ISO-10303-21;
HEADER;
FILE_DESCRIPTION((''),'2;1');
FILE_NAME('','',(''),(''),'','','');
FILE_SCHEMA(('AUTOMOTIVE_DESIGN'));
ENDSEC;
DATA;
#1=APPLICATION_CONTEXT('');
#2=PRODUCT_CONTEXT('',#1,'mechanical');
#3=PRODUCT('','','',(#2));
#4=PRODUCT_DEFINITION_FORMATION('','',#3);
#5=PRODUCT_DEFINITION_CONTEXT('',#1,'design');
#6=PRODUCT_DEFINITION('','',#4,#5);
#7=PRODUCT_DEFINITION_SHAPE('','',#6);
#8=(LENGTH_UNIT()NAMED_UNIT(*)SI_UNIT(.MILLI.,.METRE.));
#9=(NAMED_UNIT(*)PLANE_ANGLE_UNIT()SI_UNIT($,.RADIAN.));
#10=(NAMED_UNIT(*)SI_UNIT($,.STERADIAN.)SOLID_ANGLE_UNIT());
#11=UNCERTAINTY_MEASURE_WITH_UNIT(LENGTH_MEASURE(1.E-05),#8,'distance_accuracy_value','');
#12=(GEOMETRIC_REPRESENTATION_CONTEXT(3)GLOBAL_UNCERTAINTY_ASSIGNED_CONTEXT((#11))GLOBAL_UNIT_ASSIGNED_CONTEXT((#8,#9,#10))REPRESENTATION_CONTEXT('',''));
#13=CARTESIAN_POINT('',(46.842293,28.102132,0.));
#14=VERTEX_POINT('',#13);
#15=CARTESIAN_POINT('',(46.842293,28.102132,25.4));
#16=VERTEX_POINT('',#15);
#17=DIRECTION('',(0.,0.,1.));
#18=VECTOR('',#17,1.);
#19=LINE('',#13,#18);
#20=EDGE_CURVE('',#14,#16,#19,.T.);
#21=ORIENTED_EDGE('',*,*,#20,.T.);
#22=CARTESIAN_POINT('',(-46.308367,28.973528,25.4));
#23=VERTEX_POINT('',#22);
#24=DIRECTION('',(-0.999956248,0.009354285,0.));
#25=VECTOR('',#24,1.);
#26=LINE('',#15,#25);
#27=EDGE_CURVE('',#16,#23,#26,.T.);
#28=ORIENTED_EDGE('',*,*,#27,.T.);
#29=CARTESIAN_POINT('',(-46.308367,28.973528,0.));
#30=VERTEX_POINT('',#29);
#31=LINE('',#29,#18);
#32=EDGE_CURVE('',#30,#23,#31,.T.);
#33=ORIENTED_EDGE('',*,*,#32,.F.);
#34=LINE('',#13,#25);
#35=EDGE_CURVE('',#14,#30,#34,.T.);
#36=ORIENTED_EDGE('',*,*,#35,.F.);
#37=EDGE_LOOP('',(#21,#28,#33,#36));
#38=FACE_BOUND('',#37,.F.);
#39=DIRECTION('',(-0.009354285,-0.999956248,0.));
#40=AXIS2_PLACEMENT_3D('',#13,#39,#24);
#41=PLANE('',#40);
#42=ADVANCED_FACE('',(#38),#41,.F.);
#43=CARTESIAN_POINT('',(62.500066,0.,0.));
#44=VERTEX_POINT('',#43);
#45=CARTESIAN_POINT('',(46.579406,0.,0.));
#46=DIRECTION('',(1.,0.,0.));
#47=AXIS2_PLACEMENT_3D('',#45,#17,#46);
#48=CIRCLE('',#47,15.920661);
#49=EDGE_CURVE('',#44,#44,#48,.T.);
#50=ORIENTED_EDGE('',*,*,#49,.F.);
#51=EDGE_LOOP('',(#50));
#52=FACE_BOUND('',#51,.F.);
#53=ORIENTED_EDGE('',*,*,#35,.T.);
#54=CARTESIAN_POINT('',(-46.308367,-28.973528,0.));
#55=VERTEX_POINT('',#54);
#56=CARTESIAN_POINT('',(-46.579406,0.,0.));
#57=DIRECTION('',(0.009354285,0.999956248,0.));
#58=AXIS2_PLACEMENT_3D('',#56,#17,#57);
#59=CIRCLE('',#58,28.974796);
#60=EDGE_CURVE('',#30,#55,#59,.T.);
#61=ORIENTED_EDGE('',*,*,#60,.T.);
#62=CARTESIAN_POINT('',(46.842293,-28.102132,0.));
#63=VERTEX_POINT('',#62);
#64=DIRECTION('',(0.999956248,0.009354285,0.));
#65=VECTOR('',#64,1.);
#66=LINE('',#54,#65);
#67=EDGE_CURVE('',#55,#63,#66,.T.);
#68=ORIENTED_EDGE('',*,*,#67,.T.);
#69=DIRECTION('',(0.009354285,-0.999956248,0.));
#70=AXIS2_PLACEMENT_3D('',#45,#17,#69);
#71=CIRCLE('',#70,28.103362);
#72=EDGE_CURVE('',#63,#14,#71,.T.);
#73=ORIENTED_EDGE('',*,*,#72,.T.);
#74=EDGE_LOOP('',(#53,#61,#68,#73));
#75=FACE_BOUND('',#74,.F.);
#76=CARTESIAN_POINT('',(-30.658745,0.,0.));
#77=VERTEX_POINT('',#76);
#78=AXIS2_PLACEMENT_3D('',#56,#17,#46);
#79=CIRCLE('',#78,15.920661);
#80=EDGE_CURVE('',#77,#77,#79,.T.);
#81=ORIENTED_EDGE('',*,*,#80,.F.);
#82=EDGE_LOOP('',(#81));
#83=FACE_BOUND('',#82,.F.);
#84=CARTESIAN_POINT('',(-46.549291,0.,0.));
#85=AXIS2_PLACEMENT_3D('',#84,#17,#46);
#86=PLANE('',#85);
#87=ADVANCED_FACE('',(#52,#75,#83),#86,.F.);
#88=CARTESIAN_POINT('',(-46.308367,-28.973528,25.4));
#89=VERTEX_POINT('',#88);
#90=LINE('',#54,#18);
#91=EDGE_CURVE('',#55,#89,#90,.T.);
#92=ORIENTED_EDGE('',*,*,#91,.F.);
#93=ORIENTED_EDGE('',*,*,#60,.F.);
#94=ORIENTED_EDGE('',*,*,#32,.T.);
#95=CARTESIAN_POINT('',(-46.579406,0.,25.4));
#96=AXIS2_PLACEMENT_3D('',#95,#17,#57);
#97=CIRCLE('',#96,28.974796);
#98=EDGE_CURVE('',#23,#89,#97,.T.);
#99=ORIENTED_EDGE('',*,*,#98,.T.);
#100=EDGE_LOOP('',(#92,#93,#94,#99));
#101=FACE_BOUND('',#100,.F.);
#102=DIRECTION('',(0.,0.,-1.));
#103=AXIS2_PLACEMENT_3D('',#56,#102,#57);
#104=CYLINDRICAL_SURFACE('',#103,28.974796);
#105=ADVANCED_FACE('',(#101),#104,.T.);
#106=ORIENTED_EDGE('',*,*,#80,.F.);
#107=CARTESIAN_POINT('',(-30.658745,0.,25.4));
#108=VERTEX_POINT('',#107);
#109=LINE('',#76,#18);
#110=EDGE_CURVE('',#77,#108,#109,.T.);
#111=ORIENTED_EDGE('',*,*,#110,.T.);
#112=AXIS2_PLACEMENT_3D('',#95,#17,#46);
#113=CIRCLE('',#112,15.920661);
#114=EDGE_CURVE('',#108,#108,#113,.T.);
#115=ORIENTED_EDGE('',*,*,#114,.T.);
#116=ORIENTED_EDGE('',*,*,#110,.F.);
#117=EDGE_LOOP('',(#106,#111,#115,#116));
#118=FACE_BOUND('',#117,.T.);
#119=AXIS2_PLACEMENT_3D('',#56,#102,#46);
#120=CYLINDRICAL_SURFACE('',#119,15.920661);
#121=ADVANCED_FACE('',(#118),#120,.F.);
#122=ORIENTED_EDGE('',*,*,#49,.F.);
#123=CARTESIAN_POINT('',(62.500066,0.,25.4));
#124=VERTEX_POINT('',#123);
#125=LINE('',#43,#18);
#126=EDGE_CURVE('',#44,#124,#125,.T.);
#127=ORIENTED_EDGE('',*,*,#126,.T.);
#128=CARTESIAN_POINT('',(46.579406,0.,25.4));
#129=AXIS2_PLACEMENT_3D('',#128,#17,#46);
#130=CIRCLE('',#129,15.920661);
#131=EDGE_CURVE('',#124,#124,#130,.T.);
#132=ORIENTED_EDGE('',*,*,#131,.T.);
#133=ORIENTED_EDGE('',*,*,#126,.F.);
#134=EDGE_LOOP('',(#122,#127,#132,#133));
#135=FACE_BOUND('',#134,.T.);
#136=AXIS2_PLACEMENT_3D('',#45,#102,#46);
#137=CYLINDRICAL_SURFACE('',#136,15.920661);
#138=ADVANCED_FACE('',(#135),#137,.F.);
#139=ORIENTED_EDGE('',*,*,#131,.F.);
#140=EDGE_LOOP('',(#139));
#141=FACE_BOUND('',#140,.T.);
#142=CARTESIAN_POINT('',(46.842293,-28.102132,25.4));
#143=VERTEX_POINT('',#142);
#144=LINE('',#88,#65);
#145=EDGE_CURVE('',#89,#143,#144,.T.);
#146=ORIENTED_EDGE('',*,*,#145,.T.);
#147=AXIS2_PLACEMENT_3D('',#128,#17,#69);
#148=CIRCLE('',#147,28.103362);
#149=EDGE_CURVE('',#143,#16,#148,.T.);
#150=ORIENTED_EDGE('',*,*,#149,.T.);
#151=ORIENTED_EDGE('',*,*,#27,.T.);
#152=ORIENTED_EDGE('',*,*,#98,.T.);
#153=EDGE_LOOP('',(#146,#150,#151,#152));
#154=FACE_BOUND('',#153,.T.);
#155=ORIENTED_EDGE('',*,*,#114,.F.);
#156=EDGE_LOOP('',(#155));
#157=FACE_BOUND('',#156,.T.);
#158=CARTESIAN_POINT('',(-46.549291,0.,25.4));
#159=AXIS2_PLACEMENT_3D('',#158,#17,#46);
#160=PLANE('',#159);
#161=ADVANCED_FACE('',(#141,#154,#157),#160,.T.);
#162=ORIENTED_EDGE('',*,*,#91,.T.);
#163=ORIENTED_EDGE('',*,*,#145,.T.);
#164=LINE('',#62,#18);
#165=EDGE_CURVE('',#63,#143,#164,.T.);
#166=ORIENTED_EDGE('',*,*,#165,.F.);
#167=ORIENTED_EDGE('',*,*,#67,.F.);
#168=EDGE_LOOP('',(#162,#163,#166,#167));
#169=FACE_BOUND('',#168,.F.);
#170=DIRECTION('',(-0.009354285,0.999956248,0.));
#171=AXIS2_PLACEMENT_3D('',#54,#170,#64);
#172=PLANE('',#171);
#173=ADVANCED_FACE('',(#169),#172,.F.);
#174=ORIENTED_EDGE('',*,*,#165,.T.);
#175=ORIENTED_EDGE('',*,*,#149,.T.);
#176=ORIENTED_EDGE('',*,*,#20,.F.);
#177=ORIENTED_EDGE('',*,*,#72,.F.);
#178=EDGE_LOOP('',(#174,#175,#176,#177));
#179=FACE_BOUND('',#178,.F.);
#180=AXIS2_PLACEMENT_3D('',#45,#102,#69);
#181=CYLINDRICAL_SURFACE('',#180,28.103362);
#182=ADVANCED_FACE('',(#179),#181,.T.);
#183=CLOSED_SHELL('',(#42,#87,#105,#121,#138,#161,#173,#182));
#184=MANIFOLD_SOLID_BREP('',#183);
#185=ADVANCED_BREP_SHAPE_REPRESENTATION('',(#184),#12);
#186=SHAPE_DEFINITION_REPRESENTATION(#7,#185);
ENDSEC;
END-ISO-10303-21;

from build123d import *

# Parameters (mm, degrees)
F0_R     = 15.9206607186
F1_DEPTH = 25.4


# Not quite as in the source:
# - the program builds the solid bodies; features that only make, move or delete a surface that nothing else refers to are left out


with BuildPart() as f1:
    # F0 (on Top) → F1 (new body)
    with BuildSketch(Plane.XY):
        with BuildLine():
            ThreePointArc((-46.3083671537, -28.9735284728), (-17.6046094791, 0), (-46.3083671537, 28.9735284728))
            ThreePointArc((-46.3083671537, 28.9735284728), (-75.5542018517, 0), (-46.3083671537, -28.9735284728))
        make_face()
        with Locations((-46.5794056654, 0)):
            Circle(F0_R, mode=Mode.SUBTRACT)
        with BuildLine():
            Line((46.8422925338, 28.1021324953), (-46.3083671537, 28.9735284728))
            ThreePointArc((-46.3083671537, 28.9735284728), (-17.6046094791, 0), (-46.3083671537, -28.9735284728))
            Line((-46.3083671537, -28.9735284728), (46.8422925338, -28.1021324953))
            ThreePointArc((46.8422925338, -28.1021324953), (74.682767747, 0), (46.8422925338, 28.1021324953))
        make_face()
        with Locations((46.5794056654, 0)):
            Circle(F0_R, mode=Mode.SUBTRACT)
    extrude(amount=F1_DEPTH)


solid = f1.part
